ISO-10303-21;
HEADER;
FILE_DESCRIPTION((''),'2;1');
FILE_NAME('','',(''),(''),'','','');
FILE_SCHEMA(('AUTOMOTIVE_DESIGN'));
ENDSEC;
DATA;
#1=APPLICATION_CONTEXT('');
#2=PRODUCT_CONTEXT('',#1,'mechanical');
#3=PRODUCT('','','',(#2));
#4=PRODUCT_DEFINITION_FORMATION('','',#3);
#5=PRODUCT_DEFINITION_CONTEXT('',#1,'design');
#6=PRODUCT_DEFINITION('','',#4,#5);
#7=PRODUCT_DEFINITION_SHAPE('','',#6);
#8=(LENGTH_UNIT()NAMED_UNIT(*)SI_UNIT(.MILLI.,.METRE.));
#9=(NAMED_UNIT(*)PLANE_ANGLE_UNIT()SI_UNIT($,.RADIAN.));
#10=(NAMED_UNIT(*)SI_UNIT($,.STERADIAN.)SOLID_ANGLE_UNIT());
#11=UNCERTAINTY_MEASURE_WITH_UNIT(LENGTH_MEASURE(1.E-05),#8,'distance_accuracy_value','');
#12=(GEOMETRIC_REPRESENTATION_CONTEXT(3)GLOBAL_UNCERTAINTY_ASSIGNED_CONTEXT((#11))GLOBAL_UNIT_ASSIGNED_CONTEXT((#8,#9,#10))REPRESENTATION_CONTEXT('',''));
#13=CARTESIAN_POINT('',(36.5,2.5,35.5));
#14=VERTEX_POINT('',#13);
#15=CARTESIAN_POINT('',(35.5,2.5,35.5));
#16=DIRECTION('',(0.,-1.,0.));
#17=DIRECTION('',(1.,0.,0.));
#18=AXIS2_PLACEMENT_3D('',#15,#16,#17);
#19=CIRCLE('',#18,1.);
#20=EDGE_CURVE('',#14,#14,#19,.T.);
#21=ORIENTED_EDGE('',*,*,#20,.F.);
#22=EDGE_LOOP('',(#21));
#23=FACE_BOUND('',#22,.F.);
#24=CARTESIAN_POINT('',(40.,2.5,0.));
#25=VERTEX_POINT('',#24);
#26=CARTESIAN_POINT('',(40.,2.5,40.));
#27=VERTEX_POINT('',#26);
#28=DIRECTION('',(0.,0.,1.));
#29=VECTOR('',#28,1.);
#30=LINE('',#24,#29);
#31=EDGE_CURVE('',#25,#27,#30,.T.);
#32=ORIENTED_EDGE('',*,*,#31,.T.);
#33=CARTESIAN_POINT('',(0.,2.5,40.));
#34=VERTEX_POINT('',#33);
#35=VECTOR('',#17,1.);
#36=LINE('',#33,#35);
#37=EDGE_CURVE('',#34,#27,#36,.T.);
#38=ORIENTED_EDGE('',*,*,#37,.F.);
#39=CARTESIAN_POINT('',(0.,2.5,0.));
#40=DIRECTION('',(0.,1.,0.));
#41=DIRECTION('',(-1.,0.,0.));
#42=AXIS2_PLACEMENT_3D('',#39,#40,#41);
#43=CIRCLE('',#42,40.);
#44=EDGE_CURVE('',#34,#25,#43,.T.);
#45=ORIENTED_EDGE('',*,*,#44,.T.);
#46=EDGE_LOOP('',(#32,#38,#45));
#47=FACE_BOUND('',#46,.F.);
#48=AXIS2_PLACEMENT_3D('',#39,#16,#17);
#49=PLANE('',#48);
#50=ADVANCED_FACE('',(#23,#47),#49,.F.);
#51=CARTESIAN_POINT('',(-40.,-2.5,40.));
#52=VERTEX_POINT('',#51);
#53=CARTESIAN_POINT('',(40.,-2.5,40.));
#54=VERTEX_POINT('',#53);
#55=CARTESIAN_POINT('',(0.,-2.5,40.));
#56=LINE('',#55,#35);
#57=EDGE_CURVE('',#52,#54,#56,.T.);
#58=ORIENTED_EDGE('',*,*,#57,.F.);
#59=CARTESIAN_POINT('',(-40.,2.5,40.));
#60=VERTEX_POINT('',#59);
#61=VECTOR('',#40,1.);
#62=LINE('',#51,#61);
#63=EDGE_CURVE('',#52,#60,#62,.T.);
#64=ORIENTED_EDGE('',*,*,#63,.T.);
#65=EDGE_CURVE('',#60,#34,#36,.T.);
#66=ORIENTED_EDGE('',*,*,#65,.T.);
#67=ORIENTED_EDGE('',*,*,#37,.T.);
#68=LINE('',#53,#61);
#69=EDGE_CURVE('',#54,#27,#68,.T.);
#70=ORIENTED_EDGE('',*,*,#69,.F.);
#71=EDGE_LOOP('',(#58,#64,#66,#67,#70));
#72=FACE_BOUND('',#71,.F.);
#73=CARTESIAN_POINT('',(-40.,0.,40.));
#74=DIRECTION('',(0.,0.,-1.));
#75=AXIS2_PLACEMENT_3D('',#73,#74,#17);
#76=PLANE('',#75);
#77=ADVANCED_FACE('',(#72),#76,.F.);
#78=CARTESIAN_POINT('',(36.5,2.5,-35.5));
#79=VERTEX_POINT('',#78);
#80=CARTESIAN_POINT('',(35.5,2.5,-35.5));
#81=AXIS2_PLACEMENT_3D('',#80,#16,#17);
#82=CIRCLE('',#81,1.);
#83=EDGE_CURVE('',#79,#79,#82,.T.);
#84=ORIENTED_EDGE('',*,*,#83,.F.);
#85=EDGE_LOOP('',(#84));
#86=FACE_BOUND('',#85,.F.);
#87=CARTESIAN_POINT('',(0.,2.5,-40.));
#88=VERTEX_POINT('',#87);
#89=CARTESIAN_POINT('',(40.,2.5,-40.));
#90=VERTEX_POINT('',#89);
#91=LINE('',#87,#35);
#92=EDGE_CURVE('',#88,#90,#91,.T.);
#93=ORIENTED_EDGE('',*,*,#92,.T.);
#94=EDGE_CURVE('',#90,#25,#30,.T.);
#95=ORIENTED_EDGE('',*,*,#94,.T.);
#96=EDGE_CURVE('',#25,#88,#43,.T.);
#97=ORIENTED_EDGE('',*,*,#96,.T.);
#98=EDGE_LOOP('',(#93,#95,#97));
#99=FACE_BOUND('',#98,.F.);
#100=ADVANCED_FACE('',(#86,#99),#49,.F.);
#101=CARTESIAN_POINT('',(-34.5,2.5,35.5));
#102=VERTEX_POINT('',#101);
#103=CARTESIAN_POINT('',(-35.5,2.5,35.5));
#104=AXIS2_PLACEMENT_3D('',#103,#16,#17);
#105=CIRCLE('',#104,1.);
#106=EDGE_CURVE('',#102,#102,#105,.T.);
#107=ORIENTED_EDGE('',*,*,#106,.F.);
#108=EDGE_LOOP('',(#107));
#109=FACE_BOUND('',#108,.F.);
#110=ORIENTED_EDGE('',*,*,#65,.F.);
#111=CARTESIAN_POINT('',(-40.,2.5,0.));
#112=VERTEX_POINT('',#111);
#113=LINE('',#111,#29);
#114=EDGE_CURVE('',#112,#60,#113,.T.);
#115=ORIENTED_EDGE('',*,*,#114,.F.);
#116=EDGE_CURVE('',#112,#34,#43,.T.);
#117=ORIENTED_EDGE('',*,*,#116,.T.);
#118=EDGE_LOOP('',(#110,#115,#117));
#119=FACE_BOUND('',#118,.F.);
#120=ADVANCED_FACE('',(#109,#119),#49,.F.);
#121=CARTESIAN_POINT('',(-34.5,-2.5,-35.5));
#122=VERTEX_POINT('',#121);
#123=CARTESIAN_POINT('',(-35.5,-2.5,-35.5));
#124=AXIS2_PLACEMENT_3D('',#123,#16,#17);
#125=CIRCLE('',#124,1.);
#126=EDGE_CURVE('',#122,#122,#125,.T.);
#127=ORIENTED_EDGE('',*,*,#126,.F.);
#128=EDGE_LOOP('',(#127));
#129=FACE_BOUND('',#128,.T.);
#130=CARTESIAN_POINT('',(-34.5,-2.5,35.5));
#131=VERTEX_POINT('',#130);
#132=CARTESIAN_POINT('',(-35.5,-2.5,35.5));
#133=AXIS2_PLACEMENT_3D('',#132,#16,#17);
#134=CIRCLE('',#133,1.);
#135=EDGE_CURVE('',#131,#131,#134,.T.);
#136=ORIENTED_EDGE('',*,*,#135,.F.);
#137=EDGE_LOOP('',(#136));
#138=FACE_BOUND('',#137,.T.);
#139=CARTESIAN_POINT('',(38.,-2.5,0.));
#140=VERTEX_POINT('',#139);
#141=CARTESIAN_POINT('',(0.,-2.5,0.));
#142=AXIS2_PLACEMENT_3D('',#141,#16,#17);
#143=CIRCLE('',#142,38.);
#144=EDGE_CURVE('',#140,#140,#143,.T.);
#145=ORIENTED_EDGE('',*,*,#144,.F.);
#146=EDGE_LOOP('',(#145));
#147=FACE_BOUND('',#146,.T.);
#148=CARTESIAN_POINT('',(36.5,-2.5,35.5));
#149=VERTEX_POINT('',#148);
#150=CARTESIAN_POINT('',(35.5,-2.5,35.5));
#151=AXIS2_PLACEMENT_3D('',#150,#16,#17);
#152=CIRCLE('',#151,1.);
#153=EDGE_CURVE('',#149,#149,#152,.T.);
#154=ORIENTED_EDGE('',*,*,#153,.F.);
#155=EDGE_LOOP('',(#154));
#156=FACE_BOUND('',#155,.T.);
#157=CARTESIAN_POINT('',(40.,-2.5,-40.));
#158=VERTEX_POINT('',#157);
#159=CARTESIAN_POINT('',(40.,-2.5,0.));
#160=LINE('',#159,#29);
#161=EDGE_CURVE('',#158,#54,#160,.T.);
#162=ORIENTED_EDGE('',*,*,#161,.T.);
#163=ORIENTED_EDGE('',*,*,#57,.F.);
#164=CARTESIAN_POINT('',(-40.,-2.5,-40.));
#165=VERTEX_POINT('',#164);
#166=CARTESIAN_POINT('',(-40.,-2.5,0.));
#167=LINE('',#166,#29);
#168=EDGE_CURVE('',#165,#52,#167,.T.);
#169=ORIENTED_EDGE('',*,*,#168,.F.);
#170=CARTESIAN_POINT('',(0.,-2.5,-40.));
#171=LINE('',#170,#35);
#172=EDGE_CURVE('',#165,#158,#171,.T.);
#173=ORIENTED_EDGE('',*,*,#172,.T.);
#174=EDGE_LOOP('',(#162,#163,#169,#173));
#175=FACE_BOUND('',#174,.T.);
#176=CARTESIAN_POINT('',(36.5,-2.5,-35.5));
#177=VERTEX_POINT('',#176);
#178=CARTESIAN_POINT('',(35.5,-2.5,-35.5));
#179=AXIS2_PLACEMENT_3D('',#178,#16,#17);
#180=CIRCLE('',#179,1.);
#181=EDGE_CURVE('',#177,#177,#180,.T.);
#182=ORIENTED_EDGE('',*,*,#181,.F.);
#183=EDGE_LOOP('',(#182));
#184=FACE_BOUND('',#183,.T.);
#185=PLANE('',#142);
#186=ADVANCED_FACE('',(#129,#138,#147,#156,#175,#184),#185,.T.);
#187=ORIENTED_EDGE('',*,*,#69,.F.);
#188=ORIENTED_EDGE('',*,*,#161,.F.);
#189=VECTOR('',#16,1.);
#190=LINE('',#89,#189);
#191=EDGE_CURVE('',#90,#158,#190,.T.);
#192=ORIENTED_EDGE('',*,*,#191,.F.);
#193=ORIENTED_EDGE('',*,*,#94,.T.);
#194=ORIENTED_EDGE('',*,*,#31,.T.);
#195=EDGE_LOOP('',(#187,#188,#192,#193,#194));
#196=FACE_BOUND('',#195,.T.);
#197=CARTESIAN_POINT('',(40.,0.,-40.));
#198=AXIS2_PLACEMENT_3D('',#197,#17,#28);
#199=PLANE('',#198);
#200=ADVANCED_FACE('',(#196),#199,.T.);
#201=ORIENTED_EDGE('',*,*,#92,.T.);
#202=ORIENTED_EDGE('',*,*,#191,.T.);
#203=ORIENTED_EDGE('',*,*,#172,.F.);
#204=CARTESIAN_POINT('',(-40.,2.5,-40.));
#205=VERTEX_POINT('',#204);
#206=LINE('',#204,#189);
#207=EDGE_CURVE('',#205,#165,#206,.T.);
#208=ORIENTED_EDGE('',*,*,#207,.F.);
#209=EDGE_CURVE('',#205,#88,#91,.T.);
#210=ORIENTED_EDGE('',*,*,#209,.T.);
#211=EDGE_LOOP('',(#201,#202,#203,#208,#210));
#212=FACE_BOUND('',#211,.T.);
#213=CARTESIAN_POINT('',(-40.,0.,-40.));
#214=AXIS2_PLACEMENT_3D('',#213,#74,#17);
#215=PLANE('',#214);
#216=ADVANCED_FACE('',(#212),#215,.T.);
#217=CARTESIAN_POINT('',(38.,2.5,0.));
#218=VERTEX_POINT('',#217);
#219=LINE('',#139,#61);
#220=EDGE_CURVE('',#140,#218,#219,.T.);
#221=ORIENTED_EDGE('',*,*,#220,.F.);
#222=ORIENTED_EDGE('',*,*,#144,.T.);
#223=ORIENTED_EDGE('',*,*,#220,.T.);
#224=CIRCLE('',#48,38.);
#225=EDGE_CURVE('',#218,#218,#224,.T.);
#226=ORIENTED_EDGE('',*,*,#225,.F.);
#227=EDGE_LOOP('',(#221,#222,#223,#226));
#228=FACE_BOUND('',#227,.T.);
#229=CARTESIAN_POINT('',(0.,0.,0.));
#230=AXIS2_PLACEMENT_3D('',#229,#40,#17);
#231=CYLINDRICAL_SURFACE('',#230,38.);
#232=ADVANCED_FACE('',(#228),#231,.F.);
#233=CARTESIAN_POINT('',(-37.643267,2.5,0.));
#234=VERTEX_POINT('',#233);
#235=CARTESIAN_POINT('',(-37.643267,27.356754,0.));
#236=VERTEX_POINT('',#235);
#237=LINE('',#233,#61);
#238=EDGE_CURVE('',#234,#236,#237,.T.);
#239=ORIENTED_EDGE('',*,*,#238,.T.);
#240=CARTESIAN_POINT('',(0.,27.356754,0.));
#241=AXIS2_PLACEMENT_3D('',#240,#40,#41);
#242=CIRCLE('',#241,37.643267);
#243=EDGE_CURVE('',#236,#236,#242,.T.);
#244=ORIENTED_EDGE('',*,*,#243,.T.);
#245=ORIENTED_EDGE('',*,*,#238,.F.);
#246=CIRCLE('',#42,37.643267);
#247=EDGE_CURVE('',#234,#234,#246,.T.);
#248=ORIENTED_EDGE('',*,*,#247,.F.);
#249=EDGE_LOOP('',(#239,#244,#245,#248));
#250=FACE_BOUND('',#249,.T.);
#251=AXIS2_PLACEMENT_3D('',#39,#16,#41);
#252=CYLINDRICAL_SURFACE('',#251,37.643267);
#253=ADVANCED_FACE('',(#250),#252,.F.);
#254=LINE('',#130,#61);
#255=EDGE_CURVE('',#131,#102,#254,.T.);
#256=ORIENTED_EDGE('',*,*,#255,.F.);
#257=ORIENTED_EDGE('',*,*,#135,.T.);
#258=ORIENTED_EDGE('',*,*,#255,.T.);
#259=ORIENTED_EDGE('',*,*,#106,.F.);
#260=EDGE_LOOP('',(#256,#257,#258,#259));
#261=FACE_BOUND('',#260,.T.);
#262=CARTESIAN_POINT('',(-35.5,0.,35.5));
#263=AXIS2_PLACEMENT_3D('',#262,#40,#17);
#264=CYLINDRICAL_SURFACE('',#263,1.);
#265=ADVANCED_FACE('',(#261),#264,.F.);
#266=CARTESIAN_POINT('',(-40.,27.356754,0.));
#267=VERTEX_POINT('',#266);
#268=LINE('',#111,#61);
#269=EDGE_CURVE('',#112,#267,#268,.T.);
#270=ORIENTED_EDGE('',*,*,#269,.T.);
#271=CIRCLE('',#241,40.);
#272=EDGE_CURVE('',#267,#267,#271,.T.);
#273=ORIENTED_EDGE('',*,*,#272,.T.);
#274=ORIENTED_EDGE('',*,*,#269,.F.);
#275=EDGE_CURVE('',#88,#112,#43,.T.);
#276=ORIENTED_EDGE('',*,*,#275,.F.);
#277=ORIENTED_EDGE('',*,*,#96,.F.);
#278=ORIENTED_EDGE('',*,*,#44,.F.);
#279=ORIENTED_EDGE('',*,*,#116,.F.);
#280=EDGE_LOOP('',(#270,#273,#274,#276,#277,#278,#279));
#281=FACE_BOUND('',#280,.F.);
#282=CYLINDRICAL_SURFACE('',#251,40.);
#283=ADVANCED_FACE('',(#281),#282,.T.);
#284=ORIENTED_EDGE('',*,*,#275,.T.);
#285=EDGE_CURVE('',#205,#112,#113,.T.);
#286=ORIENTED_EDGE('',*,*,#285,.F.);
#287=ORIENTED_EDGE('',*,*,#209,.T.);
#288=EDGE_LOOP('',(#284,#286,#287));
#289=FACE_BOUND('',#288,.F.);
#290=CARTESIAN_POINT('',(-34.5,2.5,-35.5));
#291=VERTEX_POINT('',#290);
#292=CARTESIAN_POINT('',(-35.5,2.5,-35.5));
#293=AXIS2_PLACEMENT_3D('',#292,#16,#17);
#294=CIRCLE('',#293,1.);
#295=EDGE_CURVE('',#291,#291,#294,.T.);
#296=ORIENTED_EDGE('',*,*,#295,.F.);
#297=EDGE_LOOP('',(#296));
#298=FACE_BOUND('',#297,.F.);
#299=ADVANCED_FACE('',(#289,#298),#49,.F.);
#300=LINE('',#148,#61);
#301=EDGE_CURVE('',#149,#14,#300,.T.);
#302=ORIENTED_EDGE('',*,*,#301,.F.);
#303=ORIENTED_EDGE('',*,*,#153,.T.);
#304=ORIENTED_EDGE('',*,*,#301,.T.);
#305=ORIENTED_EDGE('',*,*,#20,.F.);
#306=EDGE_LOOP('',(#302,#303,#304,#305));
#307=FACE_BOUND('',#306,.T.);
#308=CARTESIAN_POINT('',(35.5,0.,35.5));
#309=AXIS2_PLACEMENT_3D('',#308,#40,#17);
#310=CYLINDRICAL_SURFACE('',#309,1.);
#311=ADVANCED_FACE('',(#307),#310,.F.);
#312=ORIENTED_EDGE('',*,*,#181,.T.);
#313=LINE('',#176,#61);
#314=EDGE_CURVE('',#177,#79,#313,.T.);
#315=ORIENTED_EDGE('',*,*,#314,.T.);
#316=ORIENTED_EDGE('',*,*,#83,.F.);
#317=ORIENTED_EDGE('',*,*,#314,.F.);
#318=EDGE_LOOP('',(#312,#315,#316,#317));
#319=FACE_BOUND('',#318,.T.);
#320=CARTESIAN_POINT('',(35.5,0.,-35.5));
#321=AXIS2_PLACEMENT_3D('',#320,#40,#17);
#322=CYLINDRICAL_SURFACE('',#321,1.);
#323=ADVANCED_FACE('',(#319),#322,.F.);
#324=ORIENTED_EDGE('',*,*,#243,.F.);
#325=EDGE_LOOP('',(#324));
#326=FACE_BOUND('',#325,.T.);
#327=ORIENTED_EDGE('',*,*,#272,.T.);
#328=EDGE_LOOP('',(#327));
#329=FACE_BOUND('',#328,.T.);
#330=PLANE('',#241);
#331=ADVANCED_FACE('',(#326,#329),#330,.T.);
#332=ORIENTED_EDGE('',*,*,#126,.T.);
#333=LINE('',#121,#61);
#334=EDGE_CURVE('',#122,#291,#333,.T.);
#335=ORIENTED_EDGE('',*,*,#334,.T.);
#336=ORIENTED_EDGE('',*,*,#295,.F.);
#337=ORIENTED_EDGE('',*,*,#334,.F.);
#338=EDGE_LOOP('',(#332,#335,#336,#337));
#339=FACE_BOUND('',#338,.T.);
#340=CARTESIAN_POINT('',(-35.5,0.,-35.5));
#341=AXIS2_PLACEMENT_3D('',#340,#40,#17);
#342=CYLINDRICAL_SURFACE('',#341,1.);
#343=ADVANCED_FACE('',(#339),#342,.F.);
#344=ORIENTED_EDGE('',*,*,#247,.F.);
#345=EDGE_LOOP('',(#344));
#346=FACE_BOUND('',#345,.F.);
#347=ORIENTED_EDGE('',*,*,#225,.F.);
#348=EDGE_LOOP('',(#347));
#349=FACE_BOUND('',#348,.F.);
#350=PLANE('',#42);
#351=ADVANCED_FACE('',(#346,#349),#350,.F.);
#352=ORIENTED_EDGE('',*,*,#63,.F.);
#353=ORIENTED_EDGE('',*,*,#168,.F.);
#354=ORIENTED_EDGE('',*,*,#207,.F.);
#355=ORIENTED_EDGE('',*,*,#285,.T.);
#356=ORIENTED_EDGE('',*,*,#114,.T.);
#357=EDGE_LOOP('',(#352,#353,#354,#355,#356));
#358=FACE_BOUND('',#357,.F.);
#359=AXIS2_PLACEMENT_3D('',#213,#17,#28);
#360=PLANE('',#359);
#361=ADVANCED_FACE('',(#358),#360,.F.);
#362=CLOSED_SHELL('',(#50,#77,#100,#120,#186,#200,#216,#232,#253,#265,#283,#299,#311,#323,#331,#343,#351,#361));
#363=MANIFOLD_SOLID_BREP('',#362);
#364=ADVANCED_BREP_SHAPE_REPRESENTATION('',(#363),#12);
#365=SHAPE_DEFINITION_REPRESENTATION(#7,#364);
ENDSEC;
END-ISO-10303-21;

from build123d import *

# Parameters (mm, degrees)
F0_W     = 80
F0_H     = 80
F0_R     = 1
F0_R_2   = 38
F1_DEPTH = 2.5
F3_R     = 40
F3_R_2   = 37.6432669416
F4_DEPTH = 24.8567536473


with BuildPart() as f1:
    # F0 (on Front) → F1 (new body, symmetric)
    with BuildSketch(Plane.XZ):
        Rectangle(F0_W, F0_H)
        with Locations((-35.5, -35.5)):
            Circle(F0_R, mode=Mode.SUBTRACT)
        with Locations((35.5, -35.5)):
            Circle(F0_R, mode=Mode.SUBTRACT)
        with Locations((-35.5, 35.5)):
            Circle(F0_R, mode=Mode.SUBTRACT)
        Circle(F0_R_2, mode=Mode.SUBTRACT)
        with Locations((35.5, 35.5)):
            Circle(F0_R, mode=Mode.SUBTRACT)
    extrude(amount=F1_DEPTH, both=True)

    # F3 (on face) → F4 (join)
    with BuildSketch(Plane(origin=(0, 2.5, 0), x_dir=(-1, 0, 0), z_dir=(0, 1, 0))):
        Circle(F3_R)
        Circle(F3_R_2, mode=Mode.SUBTRACT)
    extrude(amount=F4_DEPTH)


solid = f1.part
